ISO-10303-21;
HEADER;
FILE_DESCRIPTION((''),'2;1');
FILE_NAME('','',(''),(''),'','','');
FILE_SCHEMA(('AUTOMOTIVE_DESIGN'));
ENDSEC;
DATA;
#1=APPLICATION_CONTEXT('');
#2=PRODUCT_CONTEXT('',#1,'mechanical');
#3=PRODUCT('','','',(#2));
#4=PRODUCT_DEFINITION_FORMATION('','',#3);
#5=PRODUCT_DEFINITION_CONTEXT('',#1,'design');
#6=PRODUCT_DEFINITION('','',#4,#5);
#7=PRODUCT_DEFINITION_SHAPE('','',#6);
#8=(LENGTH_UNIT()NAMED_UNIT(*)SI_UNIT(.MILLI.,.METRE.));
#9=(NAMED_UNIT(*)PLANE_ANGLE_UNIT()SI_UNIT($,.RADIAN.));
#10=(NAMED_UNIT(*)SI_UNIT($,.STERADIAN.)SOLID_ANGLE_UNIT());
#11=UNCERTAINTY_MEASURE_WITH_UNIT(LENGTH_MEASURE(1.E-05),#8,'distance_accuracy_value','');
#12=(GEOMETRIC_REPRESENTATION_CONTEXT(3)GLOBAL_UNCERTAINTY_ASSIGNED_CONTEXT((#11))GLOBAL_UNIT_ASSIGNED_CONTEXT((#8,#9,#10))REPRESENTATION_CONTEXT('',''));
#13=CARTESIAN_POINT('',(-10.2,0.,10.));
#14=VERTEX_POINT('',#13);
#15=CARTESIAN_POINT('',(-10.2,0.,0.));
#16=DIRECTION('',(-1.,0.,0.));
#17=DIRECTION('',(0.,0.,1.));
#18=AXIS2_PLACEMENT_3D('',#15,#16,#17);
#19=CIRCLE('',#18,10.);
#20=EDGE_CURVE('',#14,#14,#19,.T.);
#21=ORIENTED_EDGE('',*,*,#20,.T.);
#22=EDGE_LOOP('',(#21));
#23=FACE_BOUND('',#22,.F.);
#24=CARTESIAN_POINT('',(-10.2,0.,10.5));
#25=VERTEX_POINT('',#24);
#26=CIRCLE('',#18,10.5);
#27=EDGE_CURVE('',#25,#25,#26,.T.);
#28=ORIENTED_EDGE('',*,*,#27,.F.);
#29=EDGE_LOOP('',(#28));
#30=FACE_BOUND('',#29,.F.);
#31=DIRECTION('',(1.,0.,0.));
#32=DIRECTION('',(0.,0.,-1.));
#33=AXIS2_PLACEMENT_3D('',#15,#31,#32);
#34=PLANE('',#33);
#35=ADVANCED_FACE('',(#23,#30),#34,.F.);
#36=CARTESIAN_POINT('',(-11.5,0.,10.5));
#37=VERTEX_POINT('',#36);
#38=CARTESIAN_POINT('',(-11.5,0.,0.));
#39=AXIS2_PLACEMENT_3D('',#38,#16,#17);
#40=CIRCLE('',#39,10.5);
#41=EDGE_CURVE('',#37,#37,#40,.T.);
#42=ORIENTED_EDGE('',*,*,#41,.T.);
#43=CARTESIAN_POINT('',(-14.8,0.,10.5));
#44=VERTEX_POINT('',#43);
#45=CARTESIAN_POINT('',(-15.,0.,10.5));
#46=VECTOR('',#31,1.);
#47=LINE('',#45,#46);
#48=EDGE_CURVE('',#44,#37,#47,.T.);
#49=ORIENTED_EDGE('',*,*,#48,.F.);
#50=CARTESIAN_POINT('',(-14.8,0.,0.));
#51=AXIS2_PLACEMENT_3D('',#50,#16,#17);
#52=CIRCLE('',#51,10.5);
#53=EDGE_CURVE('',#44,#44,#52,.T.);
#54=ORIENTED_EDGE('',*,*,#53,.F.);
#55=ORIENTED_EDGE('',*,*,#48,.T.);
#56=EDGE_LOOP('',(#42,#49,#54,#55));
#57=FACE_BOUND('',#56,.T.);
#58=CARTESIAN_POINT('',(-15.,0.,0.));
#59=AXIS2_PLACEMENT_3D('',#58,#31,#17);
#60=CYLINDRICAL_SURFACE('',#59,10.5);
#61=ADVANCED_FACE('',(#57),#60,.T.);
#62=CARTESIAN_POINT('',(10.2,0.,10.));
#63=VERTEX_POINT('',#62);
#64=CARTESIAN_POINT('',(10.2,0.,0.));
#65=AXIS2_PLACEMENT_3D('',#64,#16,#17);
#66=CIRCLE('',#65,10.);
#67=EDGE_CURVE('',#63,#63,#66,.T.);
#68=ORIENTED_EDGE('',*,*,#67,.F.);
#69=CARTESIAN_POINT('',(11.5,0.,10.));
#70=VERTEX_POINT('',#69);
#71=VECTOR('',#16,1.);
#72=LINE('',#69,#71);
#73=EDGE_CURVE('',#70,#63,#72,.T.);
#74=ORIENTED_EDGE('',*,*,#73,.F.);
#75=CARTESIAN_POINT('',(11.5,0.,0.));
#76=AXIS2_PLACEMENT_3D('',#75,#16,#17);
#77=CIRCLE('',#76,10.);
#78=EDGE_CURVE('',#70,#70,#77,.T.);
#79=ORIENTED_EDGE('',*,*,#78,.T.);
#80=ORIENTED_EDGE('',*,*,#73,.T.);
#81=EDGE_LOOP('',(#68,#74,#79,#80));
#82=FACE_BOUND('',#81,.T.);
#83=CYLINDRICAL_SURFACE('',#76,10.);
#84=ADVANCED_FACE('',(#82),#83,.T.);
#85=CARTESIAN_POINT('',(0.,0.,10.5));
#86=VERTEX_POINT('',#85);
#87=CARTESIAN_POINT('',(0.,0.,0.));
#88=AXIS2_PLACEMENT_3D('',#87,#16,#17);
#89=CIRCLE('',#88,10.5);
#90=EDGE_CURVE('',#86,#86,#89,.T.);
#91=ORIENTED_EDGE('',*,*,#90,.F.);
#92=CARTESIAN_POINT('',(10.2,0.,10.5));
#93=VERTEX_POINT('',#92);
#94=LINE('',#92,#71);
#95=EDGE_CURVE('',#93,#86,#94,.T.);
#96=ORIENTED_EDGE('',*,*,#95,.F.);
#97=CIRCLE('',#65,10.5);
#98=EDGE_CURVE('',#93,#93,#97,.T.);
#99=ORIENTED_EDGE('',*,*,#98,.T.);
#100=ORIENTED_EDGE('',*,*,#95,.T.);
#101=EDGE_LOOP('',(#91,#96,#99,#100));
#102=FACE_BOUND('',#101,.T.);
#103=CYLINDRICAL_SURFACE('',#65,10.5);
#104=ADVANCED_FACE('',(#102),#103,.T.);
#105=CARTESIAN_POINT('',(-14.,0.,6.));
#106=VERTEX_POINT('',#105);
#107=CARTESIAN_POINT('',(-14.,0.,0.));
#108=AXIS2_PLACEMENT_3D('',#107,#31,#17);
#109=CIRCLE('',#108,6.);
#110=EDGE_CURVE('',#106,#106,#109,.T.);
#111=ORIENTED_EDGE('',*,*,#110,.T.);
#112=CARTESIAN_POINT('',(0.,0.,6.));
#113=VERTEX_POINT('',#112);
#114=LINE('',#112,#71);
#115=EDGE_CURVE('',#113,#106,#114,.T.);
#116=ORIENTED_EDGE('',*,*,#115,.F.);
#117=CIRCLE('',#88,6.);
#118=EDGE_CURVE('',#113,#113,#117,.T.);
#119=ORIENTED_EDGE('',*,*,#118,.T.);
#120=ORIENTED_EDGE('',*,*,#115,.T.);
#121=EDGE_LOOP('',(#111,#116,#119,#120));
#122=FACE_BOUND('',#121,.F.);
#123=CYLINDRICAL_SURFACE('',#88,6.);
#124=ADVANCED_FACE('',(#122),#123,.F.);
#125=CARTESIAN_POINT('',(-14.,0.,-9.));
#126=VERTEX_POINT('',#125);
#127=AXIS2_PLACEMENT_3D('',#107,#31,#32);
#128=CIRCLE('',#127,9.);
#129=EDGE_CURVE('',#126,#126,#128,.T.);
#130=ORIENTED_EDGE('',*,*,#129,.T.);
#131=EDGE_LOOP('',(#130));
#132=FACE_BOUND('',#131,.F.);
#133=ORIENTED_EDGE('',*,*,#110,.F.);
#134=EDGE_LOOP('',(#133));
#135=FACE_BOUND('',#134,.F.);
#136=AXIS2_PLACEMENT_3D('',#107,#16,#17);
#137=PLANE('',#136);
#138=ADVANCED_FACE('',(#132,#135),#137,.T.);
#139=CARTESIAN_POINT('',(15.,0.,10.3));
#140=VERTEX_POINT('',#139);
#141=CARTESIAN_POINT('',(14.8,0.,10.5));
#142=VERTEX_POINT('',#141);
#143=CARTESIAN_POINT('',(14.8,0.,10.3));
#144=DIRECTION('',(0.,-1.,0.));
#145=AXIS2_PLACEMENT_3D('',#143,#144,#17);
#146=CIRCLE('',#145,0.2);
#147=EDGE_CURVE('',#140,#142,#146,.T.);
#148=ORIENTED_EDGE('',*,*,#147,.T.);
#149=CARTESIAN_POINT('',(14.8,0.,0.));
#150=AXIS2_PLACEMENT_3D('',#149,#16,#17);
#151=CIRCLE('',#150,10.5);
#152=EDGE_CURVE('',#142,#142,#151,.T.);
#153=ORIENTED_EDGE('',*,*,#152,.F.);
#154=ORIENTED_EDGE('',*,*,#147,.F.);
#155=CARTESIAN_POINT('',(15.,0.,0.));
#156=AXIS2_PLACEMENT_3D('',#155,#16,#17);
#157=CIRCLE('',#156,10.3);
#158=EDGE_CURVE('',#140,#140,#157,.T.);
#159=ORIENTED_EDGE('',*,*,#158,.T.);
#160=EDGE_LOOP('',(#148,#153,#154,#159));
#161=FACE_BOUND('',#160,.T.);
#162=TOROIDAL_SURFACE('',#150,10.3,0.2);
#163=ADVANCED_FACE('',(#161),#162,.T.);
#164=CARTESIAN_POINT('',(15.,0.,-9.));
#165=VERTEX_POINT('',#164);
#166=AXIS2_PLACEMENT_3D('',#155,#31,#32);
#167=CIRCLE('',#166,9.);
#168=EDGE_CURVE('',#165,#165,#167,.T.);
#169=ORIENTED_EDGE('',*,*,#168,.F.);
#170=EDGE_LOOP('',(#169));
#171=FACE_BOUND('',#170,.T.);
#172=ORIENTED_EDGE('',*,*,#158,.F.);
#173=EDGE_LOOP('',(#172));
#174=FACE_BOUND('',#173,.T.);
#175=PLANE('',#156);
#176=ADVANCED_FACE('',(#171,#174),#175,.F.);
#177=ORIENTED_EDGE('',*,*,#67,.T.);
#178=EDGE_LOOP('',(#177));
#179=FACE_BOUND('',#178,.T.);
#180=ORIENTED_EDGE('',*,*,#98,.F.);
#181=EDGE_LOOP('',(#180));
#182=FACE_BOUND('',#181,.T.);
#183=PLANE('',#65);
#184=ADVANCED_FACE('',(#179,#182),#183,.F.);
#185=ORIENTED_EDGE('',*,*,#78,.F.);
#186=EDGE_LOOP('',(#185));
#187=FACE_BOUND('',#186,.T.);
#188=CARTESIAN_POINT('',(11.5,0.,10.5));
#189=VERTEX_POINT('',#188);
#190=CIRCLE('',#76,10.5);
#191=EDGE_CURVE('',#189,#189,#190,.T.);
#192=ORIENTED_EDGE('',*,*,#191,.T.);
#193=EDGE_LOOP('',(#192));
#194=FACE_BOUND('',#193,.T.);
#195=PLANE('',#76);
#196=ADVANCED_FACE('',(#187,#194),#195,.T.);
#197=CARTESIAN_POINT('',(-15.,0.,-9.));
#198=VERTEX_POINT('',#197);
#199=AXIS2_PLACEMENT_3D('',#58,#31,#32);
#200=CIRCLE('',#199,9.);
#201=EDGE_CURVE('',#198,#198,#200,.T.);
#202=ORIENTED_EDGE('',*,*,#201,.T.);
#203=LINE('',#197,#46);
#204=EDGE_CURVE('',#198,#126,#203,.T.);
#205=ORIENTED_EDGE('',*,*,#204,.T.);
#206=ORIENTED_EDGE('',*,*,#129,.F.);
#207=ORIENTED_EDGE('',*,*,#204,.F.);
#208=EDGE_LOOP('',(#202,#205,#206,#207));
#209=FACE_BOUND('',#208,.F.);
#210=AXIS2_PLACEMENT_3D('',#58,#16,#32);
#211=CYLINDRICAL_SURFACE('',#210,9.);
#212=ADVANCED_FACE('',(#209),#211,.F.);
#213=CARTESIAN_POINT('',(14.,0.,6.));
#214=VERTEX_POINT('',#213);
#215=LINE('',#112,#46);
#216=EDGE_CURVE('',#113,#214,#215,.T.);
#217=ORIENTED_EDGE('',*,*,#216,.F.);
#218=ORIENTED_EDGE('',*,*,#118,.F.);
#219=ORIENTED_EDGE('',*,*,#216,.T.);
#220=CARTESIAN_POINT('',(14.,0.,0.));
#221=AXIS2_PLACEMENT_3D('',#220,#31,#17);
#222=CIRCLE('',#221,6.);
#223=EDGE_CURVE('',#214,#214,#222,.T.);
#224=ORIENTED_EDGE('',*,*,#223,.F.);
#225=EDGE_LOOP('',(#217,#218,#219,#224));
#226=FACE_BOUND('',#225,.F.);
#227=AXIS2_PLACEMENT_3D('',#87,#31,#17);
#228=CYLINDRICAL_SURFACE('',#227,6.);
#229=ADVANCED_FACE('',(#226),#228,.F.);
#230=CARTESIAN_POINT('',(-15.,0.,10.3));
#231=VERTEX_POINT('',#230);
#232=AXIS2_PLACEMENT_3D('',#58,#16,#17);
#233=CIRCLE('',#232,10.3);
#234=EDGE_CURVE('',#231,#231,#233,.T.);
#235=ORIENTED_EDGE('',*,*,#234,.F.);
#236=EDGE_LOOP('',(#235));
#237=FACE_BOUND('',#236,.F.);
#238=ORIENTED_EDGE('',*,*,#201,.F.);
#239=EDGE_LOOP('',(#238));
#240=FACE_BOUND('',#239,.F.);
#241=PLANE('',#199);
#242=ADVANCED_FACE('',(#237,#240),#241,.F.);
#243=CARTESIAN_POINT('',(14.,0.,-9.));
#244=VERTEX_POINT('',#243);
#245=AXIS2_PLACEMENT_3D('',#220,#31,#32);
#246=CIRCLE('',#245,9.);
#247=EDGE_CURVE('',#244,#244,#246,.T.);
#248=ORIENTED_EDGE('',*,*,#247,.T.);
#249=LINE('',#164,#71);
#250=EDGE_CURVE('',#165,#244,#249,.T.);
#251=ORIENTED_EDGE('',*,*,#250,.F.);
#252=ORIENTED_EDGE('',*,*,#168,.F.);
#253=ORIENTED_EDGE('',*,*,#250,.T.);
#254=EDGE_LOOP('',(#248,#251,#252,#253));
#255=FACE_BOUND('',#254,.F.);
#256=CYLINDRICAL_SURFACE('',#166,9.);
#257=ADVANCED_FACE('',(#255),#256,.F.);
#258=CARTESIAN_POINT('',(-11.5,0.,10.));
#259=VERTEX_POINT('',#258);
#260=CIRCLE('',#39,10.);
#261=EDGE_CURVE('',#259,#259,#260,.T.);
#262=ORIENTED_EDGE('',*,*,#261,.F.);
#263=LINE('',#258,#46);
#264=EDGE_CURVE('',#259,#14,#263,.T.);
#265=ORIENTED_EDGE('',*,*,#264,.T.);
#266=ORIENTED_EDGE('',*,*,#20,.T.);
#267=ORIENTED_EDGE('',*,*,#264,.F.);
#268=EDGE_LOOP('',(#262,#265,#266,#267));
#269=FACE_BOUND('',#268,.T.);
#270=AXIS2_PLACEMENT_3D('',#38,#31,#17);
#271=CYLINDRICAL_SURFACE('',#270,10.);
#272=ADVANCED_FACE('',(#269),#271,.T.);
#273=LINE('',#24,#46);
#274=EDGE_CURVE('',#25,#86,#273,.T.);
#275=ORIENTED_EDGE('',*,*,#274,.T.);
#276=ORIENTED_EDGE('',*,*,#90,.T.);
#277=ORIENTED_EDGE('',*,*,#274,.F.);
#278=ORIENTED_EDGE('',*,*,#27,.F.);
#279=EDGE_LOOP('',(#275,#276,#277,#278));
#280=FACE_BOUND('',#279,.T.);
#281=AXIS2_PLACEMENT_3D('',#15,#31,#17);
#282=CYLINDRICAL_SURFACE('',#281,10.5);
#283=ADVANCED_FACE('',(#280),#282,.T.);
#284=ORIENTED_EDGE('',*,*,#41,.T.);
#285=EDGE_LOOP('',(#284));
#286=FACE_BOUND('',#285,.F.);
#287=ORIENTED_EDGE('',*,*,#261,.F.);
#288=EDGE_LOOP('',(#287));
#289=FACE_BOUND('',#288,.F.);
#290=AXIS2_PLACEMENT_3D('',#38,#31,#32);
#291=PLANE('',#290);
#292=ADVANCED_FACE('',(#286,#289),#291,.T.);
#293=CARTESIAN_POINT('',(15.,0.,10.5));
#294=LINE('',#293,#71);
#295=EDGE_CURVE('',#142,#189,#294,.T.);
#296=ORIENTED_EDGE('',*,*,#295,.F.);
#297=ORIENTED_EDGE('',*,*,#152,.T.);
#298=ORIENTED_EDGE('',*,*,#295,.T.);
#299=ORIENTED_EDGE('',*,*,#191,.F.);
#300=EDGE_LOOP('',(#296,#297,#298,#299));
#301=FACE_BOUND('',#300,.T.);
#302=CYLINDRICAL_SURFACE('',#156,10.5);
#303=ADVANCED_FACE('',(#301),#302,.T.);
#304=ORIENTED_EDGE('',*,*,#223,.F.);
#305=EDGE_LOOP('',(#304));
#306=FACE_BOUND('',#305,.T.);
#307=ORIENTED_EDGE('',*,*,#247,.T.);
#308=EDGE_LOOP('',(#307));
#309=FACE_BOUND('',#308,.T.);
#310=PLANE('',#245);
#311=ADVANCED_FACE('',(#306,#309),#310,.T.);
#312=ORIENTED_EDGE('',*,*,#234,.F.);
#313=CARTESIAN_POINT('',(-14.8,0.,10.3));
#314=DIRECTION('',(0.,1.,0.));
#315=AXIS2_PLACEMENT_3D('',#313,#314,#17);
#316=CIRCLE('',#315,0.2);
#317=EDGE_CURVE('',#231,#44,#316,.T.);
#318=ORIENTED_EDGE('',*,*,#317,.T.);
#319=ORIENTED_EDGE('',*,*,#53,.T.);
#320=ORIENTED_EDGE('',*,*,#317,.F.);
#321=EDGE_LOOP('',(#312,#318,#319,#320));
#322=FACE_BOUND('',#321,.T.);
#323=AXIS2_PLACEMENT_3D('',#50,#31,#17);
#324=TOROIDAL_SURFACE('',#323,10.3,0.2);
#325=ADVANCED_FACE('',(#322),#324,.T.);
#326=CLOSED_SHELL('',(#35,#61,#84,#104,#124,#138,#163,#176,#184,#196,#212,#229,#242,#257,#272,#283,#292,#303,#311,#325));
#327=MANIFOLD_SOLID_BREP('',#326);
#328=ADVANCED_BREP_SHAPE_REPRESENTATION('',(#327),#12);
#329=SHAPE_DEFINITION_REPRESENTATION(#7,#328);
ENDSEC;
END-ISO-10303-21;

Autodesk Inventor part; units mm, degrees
ref_plane "YZ Plane" through (0, 0, 0) normal (1, 0, 0) x (0, 1, 0)
ref_plane "XZ Plane" through (0, 0, 0) normal (0, 1, 0) x (-1, 0, 0)
ref_plane "XY Plane" through (0, 0, 0) normal (0, 0, 1) x (1, 0, 0)
sketch "Schizzo1" plane through (0, 0, 0) normal (0, 1, 0) x (-1, 0, 0)
  line L0 (-15, 6) -> (-15, 10.5)
  line L1 (-15, 10.5) -> (-11.5, 10.5)
  line L2 (-11.5, 10.5) -> (-11.5, 10)
  line L3 (-11.5, 10) -> (-10.2, 10)
  line L4 (-10.2, 10) -> (-10.2, 10.5)
  line L5 (-10.2, 10.5) -> (0, 10.5)
  line L6 (0, 10.5) -> (0, 6)
  line L7 (0, 6) -> (-15, 6)
  line L8 (0, 0) -> (5.7518, 0)
  dimension "d0" = 12
  dimension "d2" = 21
  dimension "d3" = 15
  dimension "d4" = 11.5
  dimension "d5" = 1.3
  dimension "d6" = 20
revolve "Rivoluzione1" add sketch "Schizzo1" angle 360 about axis through (0, 0, 0) along (-1, 0, 0)
fillet "Raccordo1" radius 0.2 1 edges at (15, 0, -10.5)
sketch "Schizzo2" plane through (15, 0, 0) normal (1, 0, 0) x (0, 0, -1)
  circle A0 centre (0, 0) radius 10.3 projected
  circle A1 centre (0, 0) radius 9
  dimension "d13" = 18
extrude "Estrusione2" cut sketch "Schizzo2" against normal blind 1 contours A1
mirror "Specchio1" about plane through (0, 0, 8.25) normal (-1, 0, 0)
properties part number "LM10UU"
